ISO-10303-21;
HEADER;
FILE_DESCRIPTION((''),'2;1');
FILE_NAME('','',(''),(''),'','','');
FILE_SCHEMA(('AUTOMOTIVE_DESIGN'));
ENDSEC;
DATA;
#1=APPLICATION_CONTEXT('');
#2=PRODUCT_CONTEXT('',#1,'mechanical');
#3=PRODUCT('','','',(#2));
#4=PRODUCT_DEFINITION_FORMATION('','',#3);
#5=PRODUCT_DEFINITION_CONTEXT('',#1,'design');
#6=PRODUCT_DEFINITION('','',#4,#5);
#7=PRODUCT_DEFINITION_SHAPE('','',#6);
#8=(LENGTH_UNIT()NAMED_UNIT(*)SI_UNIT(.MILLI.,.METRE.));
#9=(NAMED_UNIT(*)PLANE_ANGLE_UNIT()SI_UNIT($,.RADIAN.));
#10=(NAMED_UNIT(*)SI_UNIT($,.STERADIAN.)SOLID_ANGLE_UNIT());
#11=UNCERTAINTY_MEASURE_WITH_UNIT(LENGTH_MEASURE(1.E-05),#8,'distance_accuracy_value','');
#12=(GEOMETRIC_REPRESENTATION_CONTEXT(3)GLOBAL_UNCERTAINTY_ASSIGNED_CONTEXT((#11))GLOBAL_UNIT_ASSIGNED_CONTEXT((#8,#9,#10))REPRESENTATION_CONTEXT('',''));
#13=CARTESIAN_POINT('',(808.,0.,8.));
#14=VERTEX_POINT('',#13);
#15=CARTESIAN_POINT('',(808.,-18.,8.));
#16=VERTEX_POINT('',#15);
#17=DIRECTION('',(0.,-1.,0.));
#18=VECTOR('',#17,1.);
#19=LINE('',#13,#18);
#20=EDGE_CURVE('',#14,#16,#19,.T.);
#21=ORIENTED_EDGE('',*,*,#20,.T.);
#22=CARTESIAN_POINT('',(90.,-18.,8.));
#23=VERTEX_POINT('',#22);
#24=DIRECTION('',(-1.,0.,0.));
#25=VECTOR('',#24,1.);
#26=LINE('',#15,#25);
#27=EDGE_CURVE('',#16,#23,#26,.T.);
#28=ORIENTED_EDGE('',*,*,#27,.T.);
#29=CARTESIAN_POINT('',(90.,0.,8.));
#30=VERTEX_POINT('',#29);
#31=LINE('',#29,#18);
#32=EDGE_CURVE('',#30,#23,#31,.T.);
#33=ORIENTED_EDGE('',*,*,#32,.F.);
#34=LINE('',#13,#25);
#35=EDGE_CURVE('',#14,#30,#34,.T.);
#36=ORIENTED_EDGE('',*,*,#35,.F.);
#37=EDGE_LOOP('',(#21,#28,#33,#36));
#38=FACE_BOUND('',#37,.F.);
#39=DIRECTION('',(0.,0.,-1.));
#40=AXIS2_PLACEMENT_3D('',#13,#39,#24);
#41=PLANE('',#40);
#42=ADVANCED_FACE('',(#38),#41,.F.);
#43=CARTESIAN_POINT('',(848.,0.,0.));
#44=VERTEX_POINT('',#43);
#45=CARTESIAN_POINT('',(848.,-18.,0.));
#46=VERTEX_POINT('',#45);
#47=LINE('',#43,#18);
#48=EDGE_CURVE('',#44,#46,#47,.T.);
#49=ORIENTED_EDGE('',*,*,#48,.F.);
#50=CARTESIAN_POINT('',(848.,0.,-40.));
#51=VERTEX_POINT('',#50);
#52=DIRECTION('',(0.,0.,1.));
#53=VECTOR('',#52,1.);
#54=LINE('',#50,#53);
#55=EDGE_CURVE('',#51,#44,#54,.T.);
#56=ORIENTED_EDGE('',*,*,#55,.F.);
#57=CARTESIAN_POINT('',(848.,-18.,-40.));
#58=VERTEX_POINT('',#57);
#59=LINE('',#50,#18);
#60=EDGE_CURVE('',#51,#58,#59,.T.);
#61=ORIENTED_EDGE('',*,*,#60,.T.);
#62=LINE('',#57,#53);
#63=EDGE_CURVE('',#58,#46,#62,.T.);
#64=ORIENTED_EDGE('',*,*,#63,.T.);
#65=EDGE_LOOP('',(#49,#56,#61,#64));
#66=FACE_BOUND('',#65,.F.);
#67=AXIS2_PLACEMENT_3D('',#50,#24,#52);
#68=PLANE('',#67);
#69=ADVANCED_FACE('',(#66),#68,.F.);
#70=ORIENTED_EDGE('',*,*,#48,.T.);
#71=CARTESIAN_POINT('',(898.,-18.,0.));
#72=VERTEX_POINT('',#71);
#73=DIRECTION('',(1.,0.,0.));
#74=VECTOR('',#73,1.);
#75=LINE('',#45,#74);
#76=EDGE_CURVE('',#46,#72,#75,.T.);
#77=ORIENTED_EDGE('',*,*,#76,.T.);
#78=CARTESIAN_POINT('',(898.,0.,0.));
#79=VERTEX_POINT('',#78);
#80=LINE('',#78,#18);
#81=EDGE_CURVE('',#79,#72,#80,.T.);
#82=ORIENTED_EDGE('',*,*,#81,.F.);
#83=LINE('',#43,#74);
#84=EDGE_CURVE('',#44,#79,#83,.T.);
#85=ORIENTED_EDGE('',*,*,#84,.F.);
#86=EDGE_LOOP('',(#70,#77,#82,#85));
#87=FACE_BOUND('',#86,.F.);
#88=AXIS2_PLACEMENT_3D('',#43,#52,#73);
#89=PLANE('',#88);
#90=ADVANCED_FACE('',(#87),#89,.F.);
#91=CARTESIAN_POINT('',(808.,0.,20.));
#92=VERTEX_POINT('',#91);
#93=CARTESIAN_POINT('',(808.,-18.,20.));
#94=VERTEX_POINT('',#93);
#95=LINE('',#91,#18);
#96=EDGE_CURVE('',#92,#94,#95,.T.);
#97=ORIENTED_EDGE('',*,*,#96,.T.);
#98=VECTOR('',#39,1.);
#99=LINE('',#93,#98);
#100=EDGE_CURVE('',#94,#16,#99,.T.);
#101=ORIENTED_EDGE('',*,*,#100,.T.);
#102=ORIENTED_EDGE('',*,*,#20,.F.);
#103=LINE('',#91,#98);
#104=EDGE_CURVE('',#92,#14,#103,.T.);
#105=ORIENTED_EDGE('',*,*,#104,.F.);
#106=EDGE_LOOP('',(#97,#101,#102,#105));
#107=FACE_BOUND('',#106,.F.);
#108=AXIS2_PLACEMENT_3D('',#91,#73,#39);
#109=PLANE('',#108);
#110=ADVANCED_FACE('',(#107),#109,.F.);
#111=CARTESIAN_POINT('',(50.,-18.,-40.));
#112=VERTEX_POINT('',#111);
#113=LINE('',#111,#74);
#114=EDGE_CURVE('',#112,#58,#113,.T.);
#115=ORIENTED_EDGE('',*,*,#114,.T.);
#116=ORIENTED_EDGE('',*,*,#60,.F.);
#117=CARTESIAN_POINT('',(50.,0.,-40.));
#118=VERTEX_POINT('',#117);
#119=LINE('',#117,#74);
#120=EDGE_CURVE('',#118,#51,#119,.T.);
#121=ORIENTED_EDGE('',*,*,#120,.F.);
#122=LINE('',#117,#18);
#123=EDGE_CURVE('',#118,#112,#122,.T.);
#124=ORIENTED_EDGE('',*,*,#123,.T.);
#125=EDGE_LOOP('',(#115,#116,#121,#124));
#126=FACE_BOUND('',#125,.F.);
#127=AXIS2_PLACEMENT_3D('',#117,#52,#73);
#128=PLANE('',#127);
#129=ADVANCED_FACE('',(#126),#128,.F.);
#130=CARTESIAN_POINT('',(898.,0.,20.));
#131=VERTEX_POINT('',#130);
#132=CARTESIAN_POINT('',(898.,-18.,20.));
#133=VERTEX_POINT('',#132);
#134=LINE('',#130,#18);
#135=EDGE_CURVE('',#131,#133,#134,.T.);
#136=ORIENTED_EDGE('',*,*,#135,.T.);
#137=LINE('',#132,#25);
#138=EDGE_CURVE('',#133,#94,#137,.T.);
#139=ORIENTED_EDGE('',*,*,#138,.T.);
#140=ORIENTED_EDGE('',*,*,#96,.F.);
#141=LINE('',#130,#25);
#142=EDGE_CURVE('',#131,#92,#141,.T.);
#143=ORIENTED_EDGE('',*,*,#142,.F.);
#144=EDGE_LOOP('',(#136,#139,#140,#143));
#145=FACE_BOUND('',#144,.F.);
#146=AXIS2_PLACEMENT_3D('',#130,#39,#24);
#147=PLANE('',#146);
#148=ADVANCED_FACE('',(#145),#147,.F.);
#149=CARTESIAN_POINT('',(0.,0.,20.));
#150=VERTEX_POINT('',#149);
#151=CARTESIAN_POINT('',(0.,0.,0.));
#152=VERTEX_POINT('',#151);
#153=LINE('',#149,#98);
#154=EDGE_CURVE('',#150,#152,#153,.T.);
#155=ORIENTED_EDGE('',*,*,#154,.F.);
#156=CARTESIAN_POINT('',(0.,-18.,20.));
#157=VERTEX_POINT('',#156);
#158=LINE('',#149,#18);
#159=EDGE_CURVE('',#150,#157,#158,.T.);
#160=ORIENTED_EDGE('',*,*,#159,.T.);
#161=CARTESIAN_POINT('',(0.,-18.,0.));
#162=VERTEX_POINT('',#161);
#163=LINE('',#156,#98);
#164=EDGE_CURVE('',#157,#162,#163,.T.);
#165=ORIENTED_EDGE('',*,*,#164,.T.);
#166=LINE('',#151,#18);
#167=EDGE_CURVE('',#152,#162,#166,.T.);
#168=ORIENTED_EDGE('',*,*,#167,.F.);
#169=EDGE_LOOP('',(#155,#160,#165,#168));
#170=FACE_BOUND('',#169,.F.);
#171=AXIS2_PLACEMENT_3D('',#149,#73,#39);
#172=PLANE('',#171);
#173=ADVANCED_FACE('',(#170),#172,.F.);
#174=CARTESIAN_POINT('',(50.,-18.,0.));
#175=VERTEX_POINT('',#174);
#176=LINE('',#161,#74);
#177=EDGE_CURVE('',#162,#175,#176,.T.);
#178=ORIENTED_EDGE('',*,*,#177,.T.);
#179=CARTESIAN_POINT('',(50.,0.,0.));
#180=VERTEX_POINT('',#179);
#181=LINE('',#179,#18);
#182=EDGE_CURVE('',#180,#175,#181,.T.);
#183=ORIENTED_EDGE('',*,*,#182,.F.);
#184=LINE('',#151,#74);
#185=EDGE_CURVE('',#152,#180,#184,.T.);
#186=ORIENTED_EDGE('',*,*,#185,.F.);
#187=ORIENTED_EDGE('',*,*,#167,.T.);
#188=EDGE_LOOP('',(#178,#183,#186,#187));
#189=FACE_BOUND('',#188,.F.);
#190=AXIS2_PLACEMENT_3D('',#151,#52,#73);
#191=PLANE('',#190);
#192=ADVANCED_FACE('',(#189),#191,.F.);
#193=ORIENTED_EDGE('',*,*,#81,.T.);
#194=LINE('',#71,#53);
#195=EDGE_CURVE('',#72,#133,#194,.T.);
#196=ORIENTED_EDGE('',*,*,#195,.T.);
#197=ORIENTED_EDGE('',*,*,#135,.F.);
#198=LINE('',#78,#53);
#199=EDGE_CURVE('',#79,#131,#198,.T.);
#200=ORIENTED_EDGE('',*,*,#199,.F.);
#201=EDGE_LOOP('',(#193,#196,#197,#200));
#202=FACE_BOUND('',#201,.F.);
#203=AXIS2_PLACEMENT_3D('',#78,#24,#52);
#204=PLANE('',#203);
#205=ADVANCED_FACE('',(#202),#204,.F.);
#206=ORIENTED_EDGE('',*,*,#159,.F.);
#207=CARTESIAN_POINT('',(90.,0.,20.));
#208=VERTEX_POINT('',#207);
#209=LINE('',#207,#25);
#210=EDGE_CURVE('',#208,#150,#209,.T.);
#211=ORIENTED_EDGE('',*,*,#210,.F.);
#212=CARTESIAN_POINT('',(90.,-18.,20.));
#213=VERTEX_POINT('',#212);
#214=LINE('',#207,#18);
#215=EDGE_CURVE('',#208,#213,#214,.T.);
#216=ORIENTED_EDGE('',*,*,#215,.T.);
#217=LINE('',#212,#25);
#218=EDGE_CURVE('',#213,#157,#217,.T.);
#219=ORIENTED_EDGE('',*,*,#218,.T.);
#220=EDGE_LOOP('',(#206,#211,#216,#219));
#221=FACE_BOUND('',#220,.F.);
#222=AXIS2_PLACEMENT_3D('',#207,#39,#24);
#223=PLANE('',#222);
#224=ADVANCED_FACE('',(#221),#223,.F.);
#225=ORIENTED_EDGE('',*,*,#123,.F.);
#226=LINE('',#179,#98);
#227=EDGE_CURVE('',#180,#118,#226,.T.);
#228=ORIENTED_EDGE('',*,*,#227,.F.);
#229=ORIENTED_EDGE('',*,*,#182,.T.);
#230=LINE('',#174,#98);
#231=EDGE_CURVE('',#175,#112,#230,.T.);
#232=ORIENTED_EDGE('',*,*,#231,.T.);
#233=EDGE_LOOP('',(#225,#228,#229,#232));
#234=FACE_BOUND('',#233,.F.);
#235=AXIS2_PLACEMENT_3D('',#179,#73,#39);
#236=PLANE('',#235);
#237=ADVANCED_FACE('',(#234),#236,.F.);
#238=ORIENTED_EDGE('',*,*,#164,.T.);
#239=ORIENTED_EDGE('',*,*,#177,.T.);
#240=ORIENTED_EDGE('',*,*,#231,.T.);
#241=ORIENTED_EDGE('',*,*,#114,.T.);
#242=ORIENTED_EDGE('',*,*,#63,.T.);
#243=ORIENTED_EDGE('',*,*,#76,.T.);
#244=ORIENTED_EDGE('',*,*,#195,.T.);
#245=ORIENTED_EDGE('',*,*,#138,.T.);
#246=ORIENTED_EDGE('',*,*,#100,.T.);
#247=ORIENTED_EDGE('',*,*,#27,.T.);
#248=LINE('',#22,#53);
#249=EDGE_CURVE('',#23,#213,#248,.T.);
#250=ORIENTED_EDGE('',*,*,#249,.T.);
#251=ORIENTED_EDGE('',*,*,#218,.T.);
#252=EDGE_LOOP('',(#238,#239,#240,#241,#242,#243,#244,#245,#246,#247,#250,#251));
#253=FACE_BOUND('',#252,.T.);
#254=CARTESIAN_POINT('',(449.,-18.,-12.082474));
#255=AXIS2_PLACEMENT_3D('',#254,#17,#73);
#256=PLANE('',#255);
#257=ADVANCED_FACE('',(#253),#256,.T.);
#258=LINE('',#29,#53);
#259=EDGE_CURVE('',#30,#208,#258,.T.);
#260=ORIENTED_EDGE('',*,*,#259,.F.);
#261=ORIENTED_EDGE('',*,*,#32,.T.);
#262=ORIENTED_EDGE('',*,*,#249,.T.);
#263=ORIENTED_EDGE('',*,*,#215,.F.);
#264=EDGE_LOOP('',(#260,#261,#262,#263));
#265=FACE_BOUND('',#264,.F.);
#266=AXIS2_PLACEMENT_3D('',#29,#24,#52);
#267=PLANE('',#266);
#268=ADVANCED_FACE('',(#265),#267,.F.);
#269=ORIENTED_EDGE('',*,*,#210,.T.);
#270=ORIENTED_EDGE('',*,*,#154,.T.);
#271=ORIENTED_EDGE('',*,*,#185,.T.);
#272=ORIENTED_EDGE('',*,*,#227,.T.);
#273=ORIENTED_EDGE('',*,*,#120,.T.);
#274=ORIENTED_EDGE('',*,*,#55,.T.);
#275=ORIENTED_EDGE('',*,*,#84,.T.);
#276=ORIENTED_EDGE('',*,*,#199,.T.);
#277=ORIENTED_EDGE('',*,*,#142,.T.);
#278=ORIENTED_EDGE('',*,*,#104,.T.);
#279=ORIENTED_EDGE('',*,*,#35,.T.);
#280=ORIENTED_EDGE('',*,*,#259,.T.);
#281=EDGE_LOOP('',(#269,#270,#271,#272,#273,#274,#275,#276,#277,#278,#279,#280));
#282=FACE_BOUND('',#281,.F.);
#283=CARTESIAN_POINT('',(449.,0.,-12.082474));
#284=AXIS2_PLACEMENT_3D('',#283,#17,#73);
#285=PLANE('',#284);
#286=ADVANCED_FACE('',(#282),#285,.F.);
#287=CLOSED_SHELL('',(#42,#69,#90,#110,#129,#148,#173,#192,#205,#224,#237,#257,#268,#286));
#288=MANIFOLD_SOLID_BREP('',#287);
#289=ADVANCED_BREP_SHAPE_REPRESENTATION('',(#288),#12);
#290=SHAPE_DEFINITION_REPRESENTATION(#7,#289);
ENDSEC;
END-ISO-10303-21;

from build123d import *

# Parameters (mm, degrees)
F1_DEPTH = 18


# Not quite as in the source:
# - a feature names something its author has since deleted; it is built from what else it names


with BuildPart() as f1:
    # F0 (on Front) → F1 (new body)
    with BuildSketch(Plane.XZ):
        Polygon((0, 20), (0, 0), (50, 0), (50, -40), (848, -40), (848, 0), (898, 0), (898, 20), (808, 20), (808, 8), (90, 8), (90, 20), align=None)
    extrude(amount=F1_DEPTH)


solid = f1.part
